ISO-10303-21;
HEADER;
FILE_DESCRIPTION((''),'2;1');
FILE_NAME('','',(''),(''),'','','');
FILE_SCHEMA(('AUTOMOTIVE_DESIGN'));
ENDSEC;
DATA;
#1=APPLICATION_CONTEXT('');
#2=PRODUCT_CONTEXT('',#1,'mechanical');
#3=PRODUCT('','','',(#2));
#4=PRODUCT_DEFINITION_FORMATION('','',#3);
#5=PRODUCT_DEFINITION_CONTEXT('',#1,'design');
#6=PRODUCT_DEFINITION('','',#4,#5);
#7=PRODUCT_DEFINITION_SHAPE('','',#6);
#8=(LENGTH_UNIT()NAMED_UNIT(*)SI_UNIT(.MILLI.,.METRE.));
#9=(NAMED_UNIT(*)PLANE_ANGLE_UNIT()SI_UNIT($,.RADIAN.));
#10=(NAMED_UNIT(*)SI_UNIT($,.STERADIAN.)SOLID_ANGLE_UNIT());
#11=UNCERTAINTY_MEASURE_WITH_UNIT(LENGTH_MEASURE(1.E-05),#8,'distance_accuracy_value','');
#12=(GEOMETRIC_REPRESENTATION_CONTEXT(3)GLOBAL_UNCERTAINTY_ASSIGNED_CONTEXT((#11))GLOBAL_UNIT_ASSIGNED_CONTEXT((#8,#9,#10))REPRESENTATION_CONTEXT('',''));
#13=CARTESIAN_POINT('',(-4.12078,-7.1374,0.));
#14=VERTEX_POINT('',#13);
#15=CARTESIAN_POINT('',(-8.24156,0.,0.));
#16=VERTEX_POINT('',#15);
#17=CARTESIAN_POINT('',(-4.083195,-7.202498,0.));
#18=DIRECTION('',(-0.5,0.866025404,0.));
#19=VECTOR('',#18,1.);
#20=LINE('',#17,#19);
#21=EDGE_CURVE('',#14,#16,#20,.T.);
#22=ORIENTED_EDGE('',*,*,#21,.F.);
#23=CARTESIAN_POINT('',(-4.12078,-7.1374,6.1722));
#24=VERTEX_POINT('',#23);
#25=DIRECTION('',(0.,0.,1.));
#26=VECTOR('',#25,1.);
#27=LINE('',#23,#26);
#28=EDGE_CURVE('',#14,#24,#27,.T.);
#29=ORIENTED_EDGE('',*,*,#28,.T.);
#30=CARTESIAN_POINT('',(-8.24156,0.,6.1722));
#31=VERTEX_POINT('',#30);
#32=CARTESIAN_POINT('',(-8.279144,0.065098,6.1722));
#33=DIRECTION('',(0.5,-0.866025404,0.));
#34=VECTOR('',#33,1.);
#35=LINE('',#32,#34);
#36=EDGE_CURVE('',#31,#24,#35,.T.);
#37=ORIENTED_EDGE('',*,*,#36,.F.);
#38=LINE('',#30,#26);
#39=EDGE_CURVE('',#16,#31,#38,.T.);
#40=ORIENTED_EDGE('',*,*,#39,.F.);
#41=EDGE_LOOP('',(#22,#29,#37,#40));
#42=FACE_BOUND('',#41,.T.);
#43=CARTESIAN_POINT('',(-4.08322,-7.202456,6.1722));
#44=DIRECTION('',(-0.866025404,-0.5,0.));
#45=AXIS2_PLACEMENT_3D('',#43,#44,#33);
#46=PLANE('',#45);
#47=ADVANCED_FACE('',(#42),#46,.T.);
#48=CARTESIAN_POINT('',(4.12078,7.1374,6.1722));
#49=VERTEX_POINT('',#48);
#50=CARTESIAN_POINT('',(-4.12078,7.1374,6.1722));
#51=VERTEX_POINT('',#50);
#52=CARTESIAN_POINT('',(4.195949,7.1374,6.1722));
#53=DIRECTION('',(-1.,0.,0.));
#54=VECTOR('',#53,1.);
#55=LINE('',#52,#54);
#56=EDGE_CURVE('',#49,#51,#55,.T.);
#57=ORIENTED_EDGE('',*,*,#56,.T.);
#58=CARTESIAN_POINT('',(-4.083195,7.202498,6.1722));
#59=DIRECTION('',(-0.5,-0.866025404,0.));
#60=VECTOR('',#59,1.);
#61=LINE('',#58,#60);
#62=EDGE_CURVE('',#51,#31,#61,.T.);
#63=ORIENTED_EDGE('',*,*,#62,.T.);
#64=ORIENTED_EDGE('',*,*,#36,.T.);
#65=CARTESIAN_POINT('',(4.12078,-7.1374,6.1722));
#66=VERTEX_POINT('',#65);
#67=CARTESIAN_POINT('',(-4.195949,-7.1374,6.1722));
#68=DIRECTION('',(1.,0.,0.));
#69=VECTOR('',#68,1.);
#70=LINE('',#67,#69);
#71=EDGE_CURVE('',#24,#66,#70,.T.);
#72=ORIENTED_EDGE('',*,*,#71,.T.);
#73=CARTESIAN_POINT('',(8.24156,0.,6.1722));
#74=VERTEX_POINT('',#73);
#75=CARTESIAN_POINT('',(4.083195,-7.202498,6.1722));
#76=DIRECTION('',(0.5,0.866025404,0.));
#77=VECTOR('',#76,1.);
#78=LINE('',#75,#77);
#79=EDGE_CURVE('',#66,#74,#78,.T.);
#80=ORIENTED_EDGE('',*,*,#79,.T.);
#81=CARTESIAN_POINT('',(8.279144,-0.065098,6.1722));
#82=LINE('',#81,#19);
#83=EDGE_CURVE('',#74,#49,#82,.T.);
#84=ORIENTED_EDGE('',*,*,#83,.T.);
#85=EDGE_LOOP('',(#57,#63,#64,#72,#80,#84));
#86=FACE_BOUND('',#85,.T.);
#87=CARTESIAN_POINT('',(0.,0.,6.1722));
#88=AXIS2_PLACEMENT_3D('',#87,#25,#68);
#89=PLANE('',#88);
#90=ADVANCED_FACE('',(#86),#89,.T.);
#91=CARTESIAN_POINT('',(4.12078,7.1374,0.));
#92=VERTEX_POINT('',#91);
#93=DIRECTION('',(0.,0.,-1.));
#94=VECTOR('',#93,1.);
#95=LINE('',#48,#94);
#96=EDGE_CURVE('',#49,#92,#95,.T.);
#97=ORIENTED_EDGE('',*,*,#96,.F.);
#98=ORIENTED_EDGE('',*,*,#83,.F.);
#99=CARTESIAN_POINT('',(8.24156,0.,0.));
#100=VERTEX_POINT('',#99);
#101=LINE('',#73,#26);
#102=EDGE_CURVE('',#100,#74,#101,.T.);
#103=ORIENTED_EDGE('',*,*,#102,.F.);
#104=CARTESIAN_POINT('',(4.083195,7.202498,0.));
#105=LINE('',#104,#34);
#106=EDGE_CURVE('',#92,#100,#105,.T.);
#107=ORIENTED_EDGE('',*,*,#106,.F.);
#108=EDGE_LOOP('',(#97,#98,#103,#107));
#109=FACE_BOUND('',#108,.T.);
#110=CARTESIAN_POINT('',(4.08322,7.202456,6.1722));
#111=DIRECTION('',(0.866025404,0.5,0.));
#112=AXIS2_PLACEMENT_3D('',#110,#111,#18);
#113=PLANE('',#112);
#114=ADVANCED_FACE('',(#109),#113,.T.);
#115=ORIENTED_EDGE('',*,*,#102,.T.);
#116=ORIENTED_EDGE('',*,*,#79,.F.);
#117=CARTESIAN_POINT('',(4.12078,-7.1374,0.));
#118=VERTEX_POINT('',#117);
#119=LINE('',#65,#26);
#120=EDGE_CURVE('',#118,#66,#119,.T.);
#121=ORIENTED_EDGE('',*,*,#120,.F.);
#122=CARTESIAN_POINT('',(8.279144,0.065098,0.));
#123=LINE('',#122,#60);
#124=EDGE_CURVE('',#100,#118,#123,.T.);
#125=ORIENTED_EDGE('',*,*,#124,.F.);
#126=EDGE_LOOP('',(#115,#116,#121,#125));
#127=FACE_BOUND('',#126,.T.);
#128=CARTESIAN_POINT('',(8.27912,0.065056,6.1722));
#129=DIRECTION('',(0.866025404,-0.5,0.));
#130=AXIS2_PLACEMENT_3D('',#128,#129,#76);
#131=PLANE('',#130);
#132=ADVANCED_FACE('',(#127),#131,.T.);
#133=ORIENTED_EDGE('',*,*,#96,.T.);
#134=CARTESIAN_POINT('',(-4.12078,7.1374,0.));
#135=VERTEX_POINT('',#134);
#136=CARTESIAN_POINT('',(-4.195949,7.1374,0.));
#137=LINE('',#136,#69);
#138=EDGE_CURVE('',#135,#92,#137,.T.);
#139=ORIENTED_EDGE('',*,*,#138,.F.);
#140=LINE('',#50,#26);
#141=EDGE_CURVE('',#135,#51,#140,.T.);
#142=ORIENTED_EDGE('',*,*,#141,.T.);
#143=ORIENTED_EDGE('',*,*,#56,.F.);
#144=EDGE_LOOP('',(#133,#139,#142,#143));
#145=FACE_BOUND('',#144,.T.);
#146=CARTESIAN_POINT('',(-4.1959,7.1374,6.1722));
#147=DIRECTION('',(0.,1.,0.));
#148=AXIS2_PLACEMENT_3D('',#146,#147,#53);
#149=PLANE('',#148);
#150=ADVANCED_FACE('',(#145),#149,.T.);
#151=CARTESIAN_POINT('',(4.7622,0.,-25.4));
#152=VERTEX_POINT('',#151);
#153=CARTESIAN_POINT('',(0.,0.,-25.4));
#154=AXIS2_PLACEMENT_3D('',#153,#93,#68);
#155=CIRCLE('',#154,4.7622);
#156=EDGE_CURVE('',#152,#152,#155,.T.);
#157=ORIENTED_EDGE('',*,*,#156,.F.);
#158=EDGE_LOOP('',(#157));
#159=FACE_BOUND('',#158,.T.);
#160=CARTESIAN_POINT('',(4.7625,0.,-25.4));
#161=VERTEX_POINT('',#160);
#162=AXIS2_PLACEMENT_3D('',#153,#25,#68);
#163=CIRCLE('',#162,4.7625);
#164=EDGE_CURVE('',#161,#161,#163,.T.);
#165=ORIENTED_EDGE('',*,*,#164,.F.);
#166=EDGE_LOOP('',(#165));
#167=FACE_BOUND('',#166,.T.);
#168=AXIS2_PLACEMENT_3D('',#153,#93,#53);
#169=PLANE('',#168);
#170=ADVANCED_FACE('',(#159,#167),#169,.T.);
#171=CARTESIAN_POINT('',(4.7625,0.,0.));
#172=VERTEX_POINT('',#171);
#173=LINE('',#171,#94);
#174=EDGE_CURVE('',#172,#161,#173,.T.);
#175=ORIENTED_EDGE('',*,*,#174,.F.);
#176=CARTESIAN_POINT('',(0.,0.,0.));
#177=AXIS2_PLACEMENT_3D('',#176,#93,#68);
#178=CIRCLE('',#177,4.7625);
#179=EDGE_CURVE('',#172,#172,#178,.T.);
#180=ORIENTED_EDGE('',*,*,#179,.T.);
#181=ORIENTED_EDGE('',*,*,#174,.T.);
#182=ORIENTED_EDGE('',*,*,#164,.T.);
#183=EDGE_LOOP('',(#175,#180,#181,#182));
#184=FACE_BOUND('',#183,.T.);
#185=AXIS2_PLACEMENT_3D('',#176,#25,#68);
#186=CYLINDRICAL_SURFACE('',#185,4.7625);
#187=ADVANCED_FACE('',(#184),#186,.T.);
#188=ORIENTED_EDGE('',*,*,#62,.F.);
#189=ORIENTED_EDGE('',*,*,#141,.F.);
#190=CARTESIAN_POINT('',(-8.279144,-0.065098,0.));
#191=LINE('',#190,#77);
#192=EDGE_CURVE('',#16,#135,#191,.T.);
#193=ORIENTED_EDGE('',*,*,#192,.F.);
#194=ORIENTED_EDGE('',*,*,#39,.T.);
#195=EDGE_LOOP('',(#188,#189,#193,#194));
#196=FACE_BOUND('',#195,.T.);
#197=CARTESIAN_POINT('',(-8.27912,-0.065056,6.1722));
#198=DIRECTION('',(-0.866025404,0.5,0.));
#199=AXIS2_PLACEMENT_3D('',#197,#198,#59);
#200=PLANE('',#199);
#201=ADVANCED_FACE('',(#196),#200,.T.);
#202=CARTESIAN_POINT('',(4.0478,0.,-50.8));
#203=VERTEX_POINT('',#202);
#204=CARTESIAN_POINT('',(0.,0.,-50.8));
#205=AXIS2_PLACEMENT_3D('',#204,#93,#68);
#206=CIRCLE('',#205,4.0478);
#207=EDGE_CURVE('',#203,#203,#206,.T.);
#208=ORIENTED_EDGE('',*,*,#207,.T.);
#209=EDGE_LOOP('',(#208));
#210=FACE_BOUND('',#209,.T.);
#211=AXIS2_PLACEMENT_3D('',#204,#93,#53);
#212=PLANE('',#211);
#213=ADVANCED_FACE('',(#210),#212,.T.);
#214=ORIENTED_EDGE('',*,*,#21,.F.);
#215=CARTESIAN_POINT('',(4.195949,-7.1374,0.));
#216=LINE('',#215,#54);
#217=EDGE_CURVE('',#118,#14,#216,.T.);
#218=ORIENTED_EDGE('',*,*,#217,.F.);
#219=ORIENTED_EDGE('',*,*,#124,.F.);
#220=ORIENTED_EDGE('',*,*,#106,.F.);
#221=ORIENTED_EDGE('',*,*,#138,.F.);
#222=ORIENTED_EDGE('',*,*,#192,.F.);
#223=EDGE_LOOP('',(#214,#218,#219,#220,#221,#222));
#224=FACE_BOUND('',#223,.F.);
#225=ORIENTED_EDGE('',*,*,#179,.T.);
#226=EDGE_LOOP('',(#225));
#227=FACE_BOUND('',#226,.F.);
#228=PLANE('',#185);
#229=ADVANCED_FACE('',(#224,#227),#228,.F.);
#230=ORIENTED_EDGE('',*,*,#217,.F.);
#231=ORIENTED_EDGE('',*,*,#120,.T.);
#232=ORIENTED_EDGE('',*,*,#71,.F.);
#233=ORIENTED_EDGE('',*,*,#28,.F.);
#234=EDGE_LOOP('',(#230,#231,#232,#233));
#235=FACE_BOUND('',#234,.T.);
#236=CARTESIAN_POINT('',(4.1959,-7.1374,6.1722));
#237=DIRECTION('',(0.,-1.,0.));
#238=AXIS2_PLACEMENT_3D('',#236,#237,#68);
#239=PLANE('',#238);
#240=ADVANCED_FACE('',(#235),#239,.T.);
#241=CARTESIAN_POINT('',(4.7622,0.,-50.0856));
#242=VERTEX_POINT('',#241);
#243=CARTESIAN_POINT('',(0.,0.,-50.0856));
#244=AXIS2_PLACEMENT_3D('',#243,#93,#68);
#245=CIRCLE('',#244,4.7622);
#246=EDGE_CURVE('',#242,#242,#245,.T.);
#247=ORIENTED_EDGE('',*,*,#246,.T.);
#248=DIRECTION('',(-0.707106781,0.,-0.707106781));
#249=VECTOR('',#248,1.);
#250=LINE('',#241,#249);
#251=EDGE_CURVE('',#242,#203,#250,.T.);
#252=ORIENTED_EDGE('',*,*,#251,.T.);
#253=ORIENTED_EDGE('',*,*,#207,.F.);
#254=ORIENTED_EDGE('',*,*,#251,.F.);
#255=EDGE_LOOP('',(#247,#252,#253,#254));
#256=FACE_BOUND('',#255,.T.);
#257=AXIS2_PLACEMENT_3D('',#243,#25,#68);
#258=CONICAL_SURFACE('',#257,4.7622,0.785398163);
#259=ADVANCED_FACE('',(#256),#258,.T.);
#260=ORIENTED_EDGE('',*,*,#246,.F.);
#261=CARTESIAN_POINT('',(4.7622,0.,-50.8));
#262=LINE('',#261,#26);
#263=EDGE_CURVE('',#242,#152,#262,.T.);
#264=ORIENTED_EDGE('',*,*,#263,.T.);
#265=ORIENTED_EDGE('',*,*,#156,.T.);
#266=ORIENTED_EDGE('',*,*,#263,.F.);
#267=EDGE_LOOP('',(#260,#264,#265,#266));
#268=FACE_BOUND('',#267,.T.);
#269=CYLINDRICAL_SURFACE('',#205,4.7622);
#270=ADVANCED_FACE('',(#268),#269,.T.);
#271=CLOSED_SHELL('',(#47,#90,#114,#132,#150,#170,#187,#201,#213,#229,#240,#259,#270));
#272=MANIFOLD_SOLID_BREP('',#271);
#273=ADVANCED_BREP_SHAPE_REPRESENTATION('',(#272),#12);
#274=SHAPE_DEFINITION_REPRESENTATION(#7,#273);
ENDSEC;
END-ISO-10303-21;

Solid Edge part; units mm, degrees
sketch "Sketch1" plane through (0, 0, 0) normal (0, 0, 1) x (1, 0, 0)
  circle A0 centre (0, 0) radius 8.2794
  dimension "D1" = 16.5588
extrude "Protrusion1" add sketch "Sketch1" along normal blind 6.1722
sketch "Sketch2" plane through (0, 0, 0) normal (0, 0, -1) x (1, 0, 0)
  circle A0 centre (0, 0) radius 4.7625
extrude "Protrusion2" add sketch "Sketch2" along normal blind 50.8
sketch "Sketch3" plane through (0, 0, -50.8) normal (0, 0, -1) x (1, 0, 0)
  circle A0 centre (0, 0) radius 4.7622
extrude "Cutout1" cut sketch "Sketch3" against normal blind 25.4 flip side to cut
chamfer "Chamfer_1" distance 0.7144 angle 45 1 edges at (-4.7622, 0, -50.8)
sketch "Sketch4" plane through (0, 0, 6.1722) normal (0, 0, 1) x (1, 0, 0)
  line L0 (-4.1959, 7.1374) -> (4.1959, 7.1374)
  dimension "D1" = 14.2748
extrude "Cutout2" cut sketch "Sketch4" against normal up to next material side at (0, 7.1874, 6.1722)
pattern_circular "Pattern1" count 6 over 360 about axis through (0, 0, 6.1722) along (0, 0, 1) of "Cutout2"
properties part number "24106018"
